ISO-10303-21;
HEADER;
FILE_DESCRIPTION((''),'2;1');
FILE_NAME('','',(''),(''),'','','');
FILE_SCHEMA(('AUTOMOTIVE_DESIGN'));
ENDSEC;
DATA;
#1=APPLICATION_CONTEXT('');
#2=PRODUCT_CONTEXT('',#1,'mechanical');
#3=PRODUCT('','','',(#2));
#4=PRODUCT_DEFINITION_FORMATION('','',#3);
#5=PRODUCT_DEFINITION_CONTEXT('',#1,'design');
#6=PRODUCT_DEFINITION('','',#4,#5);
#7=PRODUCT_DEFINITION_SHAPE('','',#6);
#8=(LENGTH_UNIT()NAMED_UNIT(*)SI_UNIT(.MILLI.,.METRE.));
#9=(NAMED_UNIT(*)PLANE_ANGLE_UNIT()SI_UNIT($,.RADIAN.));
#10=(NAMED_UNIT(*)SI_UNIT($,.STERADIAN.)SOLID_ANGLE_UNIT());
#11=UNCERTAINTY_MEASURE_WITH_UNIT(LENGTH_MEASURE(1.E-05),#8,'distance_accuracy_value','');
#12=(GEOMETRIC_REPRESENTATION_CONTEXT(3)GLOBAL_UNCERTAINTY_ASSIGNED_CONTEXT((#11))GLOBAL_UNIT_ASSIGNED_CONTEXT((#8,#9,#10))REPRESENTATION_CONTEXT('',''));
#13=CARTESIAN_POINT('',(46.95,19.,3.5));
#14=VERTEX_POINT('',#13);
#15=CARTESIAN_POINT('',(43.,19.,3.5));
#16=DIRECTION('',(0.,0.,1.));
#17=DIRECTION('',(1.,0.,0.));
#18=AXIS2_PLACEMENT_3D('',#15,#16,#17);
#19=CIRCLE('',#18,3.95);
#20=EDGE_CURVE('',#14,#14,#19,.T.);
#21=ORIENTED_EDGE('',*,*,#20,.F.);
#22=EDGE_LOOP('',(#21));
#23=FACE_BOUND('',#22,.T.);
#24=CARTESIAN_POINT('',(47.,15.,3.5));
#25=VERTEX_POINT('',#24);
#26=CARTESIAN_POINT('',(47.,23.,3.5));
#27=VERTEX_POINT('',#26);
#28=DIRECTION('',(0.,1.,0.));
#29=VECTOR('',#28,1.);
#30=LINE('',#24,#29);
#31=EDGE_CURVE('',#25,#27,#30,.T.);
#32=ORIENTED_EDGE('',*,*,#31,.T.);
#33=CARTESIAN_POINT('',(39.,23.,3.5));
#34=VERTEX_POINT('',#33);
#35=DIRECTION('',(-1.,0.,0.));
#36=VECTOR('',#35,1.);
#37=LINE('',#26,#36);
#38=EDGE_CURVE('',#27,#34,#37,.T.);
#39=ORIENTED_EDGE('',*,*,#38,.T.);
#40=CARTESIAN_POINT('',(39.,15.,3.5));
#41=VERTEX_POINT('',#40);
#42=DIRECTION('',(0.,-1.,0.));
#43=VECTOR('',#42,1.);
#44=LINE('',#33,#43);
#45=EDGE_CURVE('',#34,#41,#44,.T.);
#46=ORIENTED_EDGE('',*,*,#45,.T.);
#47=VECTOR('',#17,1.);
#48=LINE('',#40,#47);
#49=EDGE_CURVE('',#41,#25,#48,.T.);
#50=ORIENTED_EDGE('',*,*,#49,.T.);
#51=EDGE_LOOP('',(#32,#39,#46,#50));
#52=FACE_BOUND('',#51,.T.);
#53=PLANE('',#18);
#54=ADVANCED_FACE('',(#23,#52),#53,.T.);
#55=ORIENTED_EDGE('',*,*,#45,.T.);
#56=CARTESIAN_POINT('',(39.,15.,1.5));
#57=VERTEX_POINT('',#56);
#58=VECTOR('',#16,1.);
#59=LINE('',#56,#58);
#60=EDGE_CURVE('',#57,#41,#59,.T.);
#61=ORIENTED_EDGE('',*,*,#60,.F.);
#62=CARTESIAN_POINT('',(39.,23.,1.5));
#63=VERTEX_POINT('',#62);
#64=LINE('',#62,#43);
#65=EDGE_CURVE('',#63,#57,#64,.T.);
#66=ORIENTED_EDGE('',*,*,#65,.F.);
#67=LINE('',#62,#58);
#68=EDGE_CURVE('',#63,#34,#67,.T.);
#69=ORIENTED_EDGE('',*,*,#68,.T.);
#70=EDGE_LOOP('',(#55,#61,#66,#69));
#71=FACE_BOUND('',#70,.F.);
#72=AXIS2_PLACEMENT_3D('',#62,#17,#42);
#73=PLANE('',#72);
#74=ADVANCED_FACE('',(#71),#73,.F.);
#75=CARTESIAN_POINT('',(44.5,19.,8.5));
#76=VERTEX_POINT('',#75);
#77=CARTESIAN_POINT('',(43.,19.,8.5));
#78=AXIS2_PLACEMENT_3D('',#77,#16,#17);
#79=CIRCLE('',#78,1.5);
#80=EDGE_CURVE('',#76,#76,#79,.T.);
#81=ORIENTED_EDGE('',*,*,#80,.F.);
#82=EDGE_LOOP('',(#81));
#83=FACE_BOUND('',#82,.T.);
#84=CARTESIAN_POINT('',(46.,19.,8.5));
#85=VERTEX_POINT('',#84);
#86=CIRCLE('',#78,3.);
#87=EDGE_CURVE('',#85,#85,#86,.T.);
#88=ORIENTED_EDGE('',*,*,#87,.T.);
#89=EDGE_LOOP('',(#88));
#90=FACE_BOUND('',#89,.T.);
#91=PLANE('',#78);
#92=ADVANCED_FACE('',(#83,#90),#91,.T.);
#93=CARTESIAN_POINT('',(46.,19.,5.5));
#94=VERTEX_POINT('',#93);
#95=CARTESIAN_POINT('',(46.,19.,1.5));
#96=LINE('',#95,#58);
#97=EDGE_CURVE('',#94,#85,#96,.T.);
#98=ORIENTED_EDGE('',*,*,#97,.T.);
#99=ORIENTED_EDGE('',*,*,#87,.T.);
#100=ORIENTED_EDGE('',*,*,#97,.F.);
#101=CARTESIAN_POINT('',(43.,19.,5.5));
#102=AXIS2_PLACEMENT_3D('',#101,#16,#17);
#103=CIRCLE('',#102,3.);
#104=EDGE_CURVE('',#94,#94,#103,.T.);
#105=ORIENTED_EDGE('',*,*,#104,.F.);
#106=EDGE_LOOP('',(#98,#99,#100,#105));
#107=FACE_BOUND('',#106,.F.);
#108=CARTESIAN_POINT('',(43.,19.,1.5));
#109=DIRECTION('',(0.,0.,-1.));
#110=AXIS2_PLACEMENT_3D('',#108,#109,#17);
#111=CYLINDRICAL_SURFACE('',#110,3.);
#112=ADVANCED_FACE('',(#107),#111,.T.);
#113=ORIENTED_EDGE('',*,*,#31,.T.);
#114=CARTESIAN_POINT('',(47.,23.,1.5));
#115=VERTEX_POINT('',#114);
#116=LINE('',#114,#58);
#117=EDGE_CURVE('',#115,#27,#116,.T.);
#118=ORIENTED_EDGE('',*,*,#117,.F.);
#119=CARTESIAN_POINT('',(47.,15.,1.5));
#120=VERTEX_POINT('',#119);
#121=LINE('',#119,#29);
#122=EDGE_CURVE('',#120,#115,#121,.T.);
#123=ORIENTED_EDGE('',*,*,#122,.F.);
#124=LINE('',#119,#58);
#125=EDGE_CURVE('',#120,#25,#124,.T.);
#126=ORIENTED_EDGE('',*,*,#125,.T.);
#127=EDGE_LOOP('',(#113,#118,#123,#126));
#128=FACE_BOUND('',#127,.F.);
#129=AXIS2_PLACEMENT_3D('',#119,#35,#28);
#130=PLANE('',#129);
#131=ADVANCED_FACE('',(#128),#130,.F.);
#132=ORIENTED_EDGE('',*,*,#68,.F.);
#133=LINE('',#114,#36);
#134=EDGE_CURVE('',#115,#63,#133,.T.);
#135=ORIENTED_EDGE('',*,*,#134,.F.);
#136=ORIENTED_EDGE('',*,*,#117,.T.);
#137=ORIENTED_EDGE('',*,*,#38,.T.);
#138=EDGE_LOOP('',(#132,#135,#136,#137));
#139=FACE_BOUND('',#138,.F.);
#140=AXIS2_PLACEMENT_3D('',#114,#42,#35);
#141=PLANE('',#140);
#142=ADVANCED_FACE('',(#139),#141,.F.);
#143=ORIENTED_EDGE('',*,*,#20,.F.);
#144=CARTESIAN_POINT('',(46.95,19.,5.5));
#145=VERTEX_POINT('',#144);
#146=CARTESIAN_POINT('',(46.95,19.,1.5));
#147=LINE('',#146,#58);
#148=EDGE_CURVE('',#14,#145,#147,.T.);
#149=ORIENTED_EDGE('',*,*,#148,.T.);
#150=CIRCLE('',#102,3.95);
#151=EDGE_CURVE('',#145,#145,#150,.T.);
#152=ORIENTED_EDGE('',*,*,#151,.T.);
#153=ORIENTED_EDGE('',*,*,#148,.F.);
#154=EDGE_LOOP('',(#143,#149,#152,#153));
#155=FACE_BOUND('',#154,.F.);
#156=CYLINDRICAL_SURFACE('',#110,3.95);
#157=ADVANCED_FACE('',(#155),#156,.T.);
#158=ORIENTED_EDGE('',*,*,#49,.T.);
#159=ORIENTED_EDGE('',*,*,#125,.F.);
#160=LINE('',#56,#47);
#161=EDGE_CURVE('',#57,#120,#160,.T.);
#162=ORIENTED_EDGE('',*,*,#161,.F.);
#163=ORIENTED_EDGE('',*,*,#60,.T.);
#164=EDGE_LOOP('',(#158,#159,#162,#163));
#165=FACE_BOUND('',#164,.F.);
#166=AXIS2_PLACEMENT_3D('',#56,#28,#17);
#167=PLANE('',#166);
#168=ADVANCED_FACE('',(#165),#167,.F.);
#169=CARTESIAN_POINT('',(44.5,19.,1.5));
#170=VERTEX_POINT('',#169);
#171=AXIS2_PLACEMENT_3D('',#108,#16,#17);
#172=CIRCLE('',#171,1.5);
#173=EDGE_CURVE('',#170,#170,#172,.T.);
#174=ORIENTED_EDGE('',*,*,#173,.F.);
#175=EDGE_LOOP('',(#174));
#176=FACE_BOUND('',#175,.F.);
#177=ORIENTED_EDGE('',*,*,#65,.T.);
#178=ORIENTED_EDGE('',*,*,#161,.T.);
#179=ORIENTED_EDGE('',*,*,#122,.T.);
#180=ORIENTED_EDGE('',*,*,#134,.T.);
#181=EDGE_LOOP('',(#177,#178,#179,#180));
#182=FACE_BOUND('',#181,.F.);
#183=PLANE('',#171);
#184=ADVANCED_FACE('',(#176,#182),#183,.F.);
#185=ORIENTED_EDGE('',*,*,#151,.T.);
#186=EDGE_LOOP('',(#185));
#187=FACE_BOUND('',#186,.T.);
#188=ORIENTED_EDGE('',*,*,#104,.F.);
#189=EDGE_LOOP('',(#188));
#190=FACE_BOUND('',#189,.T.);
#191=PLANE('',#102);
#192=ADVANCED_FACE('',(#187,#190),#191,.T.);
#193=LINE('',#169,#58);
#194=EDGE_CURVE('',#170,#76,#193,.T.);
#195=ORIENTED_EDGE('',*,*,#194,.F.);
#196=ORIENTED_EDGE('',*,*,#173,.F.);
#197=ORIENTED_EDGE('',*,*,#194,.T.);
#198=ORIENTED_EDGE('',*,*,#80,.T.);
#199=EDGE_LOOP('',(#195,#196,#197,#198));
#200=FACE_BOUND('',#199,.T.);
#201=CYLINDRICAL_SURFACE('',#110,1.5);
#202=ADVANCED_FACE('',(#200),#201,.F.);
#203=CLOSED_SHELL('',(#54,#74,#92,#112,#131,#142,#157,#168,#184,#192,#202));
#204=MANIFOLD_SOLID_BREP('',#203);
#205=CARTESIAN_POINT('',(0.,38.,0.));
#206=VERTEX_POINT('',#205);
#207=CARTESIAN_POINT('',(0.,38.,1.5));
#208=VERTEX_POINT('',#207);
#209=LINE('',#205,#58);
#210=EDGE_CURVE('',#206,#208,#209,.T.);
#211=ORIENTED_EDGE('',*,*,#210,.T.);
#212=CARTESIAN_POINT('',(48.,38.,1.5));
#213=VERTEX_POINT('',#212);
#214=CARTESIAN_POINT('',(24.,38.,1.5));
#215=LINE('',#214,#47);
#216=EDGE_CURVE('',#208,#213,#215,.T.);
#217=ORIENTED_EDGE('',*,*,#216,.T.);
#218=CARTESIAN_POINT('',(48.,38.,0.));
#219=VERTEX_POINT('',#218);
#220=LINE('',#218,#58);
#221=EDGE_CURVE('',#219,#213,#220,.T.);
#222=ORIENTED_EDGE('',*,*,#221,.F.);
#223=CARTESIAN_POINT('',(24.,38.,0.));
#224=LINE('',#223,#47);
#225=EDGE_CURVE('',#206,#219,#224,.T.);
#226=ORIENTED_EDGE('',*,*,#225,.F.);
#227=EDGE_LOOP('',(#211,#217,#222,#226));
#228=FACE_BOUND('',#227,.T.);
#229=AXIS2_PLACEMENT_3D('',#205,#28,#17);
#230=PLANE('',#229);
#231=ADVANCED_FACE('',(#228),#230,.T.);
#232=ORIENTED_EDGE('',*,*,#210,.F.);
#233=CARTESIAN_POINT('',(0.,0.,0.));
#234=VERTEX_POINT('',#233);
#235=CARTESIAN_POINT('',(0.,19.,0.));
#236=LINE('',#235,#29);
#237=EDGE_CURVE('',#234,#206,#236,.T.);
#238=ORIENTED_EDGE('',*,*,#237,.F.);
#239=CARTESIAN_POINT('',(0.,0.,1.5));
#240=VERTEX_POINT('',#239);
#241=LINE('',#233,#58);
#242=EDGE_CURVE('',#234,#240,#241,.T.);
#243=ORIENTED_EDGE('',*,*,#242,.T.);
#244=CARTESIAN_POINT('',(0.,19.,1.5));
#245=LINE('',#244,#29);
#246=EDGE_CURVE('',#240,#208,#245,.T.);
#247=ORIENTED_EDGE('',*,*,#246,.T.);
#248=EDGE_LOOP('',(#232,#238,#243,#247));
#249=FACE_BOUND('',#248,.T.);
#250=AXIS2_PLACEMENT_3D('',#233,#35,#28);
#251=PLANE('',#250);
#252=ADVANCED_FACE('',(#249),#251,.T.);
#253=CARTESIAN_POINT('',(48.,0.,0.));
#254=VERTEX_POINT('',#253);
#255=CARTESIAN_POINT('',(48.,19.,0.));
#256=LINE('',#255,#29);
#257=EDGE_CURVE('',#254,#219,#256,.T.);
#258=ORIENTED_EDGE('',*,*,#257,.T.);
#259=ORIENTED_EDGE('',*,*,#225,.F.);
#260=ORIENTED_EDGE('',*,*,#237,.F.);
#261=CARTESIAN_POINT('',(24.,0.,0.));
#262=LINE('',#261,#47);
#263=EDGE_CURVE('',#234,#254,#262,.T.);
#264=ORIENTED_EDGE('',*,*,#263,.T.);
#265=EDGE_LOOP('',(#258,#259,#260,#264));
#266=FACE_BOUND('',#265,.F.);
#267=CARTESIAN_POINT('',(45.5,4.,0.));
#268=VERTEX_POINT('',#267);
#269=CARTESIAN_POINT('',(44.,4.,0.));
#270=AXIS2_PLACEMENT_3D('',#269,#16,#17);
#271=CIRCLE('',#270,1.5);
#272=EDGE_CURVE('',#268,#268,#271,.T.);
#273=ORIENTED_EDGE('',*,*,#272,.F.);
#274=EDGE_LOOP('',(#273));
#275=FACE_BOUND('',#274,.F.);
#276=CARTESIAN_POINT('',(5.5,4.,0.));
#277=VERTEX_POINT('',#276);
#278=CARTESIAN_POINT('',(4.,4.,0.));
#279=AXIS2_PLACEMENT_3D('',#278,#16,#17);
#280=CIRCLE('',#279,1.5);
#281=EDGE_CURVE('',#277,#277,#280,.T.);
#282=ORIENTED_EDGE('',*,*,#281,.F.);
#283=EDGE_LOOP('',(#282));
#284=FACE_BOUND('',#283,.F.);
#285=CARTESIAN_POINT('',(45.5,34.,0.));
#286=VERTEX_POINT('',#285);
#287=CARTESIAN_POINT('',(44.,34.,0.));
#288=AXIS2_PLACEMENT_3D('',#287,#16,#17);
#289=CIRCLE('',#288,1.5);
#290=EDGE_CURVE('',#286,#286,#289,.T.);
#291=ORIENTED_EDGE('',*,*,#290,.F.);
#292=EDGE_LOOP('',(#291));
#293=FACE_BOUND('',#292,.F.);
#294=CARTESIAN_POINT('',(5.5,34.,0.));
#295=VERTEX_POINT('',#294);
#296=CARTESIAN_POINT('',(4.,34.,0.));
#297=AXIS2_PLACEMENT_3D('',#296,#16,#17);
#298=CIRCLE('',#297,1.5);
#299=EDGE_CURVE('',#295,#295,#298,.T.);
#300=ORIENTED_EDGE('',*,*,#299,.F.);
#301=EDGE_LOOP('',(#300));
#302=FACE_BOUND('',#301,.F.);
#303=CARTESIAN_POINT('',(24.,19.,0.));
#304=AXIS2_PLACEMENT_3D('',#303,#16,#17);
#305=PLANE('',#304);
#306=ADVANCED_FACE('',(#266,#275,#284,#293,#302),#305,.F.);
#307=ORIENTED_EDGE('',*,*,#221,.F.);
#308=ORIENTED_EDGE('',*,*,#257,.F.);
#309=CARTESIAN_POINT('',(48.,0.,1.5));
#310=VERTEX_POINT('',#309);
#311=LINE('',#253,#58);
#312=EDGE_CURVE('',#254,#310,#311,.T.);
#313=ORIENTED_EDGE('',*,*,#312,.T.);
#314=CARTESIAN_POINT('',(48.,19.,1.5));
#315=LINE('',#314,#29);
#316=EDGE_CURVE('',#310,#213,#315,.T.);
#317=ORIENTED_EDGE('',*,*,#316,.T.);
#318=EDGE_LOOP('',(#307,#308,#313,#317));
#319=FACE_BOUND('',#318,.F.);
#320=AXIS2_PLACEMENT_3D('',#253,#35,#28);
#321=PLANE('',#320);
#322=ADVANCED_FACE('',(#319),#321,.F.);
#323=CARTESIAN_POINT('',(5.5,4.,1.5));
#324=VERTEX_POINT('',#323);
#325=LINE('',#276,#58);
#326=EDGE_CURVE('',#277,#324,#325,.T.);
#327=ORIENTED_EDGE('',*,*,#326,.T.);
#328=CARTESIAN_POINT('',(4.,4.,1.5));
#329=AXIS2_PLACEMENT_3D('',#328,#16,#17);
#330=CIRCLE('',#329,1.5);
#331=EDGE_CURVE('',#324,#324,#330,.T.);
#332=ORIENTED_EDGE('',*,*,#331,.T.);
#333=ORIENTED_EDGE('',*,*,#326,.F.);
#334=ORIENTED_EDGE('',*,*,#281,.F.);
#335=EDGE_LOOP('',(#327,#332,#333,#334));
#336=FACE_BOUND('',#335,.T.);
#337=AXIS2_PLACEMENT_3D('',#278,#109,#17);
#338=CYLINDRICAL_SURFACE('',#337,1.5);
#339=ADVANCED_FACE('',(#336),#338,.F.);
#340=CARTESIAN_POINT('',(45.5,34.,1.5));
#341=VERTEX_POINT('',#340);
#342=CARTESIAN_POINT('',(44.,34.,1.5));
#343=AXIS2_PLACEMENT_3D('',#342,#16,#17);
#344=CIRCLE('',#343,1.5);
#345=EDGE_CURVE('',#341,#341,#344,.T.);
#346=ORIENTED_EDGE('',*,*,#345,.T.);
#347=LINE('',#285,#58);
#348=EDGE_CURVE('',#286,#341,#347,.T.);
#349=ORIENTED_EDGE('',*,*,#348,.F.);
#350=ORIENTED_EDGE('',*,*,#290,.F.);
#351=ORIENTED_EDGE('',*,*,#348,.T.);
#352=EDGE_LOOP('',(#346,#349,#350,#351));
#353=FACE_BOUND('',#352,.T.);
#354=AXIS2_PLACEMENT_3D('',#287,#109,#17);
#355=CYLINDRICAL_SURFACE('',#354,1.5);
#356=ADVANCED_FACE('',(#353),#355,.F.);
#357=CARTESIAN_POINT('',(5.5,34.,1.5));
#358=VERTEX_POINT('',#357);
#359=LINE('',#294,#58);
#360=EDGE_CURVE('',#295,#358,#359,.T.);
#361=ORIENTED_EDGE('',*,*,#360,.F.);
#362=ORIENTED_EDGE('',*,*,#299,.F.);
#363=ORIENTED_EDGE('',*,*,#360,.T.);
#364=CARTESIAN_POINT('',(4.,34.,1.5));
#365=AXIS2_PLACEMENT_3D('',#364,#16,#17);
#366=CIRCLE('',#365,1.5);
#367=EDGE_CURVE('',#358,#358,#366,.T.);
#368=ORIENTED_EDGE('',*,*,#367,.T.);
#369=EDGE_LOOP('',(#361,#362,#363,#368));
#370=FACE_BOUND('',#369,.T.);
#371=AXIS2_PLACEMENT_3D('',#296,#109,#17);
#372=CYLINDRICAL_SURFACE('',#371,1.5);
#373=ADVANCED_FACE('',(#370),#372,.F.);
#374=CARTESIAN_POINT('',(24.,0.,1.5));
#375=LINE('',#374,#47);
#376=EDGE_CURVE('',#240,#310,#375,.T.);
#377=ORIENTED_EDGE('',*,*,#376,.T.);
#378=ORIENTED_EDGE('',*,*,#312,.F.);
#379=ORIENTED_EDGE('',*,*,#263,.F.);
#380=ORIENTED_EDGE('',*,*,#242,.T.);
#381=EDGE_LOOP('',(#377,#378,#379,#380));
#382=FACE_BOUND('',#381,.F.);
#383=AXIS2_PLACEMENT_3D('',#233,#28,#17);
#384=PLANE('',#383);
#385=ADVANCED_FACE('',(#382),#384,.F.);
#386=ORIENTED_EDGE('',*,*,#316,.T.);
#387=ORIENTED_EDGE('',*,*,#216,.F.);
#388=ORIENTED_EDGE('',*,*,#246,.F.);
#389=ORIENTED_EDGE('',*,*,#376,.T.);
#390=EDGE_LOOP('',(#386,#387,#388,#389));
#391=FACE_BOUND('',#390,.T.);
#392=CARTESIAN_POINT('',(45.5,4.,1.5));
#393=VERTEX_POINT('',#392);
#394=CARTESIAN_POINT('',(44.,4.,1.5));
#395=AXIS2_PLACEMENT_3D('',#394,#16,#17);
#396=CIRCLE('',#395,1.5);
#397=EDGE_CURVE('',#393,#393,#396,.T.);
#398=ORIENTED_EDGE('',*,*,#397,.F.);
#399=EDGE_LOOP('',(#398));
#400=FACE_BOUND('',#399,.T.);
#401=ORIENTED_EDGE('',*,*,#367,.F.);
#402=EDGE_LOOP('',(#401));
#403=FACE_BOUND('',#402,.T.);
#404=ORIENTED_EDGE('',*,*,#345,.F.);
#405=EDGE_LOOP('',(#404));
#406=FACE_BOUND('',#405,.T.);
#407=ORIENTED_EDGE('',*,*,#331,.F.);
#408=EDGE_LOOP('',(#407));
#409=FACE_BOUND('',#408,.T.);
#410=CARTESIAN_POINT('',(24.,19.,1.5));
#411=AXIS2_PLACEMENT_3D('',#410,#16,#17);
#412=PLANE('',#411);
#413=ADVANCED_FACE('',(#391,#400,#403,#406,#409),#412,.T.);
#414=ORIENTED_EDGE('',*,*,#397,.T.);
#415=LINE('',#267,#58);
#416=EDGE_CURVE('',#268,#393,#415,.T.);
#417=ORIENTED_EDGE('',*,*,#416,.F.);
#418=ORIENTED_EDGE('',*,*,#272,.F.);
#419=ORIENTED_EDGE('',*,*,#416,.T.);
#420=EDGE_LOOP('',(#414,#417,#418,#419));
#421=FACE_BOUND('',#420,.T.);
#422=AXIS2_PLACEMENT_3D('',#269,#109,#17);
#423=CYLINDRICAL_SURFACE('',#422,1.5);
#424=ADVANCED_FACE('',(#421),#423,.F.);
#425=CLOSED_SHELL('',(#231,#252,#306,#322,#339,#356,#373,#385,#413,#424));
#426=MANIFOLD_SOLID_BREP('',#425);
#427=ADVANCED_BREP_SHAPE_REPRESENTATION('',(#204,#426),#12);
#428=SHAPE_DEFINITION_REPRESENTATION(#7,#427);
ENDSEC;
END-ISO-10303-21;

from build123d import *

# Parameters (mm, degrees)
F0_W     = 48
F0_H     = 38
F0_R     = 1.5
F1_DEPTH = 1.5
F2_R     = 3.95
F3_DEPTH = 2
F2_R_2   = 3
F4_DEPTH = 4
F2_R_3   = 1.5
F5_DEPTH = 7


with BuildPart() as f1:
    # F0 (on Top) → F1 (new body)
    with BuildSketch(Plane.XY):
        with Locations((24, 19)):
            Rectangle(F0_W, F0_H)
        with Locations((4, 4)):
            Circle(F0_R, mode=Mode.SUBTRACT)
        with Locations((44, 4)):
            Circle(F0_R, mode=Mode.SUBTRACT)
        with Locations((4, 34)):
            Circle(F0_R, mode=Mode.SUBTRACT)
        with Locations((44, 34)):
            Circle(F0_R, mode=Mode.SUBTRACT)
    extrude(amount=F1_DEPTH)


with BuildPart() as f3:
    # F2 (on face) → F3 (new body)
    with BuildSketch(Plane.XY.offset(1.5)):
        Polygon((47, 15), (47, 19), (47, 23), (39, 23), (39, 15), align=None)
        with Locations((43, 19)):
            Circle(F2_R, mode=Mode.SUBTRACT)
    extrude(amount=F3_DEPTH)

    # F2 (on face) → F4 (join)
    with BuildSketch(Plane.XY.offset(1.5)):
        with Locations((43, 19)):
            Circle(F2_R)
        with Locations((43, 19)):
            Circle(F2_R_2, mode=Mode.SUBTRACT)
    extrude(amount=F4_DEPTH)

    # F2 (on face) → F5 (join)
    with BuildSketch(Plane.XY.offset(1.5)):
        with Locations((43, 19)):
            Circle(F2_R_2)
        with Locations((43, 19)):
            Circle(F2_R_3, mode=Mode.SUBTRACT)
    extrude(amount=F5_DEPTH)


solid = Compound([f1.part, f3.part])
